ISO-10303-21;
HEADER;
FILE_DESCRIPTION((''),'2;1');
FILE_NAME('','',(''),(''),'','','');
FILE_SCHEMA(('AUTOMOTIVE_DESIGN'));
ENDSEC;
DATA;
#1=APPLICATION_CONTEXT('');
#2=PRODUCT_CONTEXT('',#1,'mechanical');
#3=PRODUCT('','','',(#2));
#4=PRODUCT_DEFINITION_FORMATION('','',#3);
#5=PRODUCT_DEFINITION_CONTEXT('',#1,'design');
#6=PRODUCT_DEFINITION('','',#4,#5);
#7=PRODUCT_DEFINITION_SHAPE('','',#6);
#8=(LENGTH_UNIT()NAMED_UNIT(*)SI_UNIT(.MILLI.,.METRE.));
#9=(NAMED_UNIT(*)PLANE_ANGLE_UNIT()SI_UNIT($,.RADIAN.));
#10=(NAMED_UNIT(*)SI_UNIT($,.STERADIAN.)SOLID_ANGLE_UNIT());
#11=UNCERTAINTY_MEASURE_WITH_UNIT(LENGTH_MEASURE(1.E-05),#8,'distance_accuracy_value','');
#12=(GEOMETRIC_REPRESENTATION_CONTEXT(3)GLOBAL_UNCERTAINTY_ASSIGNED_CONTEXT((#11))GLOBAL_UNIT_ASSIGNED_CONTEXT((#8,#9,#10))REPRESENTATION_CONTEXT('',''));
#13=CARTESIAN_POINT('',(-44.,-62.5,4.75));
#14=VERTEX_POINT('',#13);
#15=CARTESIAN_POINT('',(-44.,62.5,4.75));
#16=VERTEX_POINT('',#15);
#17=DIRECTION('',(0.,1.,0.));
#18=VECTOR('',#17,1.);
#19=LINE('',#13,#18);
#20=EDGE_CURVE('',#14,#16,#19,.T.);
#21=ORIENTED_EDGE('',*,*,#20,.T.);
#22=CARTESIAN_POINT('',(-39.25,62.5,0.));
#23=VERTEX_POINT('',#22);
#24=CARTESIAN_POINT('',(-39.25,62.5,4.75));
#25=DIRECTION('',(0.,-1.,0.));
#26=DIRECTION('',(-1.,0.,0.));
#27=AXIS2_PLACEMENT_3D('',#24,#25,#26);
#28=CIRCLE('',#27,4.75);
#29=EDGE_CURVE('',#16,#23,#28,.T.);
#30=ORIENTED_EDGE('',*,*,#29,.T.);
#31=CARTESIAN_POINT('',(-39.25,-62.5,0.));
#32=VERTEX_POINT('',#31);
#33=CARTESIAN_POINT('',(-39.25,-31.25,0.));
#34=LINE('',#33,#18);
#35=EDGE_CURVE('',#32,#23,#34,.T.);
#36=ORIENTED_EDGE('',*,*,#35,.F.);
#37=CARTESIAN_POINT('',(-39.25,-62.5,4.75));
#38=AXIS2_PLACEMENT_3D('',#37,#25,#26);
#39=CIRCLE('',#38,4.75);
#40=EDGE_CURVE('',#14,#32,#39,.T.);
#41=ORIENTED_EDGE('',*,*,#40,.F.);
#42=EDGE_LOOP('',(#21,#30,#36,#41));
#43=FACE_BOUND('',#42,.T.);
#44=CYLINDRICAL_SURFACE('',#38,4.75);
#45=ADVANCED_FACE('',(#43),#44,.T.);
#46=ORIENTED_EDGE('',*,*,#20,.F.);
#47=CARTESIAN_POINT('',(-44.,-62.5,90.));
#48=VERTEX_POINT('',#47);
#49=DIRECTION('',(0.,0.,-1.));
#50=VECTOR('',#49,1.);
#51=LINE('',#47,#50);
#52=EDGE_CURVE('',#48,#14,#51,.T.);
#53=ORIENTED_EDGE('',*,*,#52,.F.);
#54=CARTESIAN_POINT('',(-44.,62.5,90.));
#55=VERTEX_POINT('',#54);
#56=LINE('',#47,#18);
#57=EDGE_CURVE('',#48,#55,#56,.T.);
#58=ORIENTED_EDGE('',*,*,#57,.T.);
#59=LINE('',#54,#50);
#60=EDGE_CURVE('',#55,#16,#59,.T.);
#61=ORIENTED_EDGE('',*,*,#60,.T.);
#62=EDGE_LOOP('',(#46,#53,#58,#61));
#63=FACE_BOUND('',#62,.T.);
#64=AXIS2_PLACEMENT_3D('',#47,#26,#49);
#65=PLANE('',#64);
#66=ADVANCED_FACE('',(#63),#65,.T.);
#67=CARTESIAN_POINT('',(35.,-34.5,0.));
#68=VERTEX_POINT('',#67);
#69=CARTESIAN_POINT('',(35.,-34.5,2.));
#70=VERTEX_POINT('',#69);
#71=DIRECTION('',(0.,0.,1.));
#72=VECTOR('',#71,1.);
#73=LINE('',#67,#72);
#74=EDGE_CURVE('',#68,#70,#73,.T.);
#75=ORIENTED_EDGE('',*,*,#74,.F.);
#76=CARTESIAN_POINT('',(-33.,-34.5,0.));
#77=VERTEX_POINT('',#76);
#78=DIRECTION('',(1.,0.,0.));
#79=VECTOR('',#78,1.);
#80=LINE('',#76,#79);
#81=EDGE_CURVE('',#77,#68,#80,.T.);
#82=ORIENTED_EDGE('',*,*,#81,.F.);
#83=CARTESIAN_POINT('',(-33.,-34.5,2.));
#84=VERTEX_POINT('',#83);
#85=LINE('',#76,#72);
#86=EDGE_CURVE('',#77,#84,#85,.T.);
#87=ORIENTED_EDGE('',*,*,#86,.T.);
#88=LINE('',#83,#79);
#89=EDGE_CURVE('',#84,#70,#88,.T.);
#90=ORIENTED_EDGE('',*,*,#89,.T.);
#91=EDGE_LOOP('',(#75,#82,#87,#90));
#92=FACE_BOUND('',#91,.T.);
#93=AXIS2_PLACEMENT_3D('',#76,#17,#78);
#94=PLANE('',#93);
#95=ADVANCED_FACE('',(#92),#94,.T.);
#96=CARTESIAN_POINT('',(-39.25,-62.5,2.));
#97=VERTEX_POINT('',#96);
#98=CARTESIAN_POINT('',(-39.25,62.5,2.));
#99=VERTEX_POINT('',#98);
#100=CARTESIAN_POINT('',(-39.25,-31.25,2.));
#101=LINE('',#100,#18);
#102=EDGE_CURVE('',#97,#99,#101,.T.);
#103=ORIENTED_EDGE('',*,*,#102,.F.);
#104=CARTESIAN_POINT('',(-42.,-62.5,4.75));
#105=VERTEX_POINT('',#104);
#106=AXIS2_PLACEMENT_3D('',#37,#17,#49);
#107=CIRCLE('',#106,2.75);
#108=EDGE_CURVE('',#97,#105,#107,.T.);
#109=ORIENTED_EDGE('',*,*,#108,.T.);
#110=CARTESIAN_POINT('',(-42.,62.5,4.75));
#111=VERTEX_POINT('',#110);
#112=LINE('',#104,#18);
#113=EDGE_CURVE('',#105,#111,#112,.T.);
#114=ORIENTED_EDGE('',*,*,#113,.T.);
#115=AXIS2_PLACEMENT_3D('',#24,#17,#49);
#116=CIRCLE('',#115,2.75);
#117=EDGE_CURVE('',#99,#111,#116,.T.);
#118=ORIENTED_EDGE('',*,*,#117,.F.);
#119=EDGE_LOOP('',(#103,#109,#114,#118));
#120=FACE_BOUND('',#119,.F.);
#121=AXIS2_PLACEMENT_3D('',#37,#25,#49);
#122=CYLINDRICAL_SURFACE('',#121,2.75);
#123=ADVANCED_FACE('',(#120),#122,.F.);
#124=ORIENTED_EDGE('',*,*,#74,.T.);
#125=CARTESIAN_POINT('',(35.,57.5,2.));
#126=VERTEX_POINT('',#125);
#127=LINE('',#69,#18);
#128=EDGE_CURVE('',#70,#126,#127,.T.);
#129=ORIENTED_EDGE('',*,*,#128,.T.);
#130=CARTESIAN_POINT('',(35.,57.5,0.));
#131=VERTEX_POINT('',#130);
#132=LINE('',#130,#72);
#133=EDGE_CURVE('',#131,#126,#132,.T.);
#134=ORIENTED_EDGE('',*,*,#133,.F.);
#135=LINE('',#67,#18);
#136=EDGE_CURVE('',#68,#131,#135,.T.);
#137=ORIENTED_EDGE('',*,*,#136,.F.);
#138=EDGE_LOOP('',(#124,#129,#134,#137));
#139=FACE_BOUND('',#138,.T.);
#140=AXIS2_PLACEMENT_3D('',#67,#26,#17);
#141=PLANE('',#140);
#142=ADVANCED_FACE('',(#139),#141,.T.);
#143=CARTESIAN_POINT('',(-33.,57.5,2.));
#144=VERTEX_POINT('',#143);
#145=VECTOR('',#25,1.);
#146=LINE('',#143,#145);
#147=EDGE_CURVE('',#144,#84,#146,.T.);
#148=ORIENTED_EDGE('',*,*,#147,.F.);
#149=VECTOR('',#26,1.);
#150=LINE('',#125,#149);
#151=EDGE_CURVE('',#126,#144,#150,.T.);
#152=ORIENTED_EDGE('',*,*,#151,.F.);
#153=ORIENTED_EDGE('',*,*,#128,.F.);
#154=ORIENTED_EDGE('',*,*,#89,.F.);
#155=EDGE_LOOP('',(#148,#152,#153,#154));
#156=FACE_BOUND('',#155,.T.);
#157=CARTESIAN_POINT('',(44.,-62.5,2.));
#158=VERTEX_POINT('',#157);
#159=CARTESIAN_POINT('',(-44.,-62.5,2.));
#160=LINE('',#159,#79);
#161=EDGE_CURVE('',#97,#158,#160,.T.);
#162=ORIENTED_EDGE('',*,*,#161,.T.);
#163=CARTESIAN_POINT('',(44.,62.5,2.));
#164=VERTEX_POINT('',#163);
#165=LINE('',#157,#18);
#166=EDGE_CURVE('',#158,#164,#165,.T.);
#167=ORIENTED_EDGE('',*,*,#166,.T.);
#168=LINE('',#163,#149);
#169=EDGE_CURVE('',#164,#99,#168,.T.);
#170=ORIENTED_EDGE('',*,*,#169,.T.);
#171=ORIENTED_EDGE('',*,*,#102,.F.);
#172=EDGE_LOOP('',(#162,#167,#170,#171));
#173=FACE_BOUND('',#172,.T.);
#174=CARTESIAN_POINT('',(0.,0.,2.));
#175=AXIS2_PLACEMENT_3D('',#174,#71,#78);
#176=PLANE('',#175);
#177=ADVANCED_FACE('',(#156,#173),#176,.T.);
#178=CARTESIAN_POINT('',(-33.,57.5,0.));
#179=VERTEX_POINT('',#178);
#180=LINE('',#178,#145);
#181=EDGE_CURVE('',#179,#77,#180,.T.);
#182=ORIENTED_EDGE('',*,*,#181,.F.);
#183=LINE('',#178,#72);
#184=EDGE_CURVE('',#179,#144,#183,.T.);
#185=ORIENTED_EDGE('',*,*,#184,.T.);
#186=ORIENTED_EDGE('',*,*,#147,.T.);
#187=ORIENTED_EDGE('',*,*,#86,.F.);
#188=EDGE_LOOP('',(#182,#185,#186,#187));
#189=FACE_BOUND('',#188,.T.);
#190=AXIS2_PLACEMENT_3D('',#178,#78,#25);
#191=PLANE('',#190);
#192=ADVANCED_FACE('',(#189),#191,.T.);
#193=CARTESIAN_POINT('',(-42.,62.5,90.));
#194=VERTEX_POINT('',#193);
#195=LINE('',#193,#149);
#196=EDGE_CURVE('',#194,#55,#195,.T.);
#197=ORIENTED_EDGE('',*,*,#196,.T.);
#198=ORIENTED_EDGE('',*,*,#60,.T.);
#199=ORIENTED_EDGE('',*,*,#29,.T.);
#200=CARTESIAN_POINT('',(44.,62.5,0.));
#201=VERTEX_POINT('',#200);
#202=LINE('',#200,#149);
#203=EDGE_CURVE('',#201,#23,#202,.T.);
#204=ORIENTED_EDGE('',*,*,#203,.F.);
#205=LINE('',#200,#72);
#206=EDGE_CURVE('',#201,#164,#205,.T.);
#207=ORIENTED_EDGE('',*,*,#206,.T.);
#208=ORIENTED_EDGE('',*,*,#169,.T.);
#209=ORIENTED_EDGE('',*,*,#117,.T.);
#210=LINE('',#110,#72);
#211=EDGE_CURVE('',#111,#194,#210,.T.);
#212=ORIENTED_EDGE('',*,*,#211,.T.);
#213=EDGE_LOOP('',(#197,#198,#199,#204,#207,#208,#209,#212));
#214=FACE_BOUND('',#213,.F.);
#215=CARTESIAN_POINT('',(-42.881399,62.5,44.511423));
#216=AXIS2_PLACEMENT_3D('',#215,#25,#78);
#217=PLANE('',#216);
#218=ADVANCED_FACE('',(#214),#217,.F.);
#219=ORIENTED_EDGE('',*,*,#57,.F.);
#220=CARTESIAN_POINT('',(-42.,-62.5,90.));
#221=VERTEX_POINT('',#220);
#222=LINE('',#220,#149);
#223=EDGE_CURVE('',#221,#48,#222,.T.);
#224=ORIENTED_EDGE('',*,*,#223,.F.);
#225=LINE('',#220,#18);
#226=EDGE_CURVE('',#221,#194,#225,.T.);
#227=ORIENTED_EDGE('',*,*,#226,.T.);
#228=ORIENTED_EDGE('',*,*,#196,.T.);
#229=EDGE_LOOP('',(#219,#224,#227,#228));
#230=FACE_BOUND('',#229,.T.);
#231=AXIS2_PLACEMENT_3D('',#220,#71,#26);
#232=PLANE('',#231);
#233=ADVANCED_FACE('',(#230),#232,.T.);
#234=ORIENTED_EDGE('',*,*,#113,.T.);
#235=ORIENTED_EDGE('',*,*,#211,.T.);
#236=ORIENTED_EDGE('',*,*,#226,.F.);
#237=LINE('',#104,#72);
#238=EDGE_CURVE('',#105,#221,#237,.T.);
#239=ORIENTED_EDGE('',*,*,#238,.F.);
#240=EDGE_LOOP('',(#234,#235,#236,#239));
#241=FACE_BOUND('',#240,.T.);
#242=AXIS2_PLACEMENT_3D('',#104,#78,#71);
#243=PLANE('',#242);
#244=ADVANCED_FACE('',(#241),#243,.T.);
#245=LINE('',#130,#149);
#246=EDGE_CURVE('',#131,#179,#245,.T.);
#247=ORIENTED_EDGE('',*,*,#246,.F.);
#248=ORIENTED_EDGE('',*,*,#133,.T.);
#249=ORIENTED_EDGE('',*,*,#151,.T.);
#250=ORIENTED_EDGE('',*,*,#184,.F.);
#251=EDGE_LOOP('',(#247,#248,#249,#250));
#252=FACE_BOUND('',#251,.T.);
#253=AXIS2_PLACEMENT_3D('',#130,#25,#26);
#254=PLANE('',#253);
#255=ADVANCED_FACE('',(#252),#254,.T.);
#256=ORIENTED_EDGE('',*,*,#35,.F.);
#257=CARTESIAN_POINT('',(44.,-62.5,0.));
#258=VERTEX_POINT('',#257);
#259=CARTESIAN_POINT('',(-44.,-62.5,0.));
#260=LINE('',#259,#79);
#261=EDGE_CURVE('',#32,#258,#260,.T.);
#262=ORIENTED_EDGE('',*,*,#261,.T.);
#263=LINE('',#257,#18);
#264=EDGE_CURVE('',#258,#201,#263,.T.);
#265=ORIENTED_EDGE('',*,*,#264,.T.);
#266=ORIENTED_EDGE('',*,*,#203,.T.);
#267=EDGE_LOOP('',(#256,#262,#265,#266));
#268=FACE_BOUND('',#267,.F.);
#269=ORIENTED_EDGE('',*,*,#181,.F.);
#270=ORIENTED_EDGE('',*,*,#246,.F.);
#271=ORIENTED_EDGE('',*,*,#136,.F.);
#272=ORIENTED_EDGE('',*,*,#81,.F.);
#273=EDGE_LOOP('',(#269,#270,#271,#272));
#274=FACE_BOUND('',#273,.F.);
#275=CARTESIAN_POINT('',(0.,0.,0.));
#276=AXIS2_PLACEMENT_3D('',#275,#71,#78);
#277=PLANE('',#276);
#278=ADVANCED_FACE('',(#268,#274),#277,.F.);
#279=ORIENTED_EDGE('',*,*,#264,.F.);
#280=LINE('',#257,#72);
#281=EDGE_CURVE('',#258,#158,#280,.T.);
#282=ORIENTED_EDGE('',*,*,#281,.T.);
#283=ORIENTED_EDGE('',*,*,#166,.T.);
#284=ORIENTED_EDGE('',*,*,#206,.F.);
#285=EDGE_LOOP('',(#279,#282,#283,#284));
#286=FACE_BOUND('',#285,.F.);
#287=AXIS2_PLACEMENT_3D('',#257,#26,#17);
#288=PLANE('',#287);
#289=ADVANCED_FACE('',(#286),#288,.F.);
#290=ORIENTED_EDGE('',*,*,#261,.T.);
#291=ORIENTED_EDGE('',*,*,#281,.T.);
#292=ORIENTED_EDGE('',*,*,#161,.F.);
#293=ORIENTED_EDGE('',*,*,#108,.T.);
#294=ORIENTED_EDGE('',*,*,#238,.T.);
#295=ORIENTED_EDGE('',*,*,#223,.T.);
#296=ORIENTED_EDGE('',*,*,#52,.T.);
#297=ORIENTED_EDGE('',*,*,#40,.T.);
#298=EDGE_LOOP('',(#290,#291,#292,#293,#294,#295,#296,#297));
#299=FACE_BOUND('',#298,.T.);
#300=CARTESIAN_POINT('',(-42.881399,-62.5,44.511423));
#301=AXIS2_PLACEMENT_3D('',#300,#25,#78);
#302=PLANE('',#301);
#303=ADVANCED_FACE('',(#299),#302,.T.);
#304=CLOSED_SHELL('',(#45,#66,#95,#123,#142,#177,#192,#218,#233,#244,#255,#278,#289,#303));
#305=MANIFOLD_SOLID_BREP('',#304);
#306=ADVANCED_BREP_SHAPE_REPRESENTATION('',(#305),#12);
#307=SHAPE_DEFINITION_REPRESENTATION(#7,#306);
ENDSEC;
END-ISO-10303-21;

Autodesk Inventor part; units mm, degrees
ref_plane "YZ Plane" through (0, 0, 0) normal (1, 0, 0) x (0, 1, 0)
ref_plane "XZ Plane" through (0, 0, 0) normal (0, 1, 0) x (-1, 0, 0)
ref_plane "XY Plane" through (0, 0, 0) normal (0, 0, 1) x (1, 0, 0)
sketch "Sketch1" plane through (0, 0, 0) normal (0, 0, 1) x (1, 0, 0)
  line L0 (-44, -62.5) -> (44, -62.5)
  line L1 (44, -62.5) -> (44, 62.5)
  line L2 (44, 62.5) -> (-44, 62.5)
  line L3 (-44, 62.5) -> (-44, -62.5)
  line L4 (-44, -62.5) -> (44, 62.5) construction
  line L5 (44, -62.5) -> (-44, 62.5) construction
  line L6 (35, 57.5) -> (-33, 57.5)
  line L7 (-33, 57.5) -> (-33, -34.5)
  line L8 (-33, -34.5) -> (35, -34.5)
  line L9 (35, -34.5) -> (35, 57.5)
  point P0 (0, 0)
  dimension "d154" = 88
  dimension "d155" = 125
  dimension "d185" = 68
  dimension "d186" = 92
  dimension "d187" = 11
  dimension "d188" = 9
  dimension "d190" = 5
extrude "Plate5" add sketch "Sketch1" along normal blind 2
sketch "Sketch7" plane through (-42, -62.5, 0) normal (-1, 0, 0) x (0, -1, 0)
  line L0 (-125, 0) -> (0, 0)
  line L1 (0, 0) -> (0, 90)
  line L2 (0, 90) -> (-125, 90)
  line L3 (-125, 90) -> (-125, 0)
edge flange "Flange3" height 90 angle 90 thickness 2 bend radius 2.75 thickness toward (-1, 0, 0) relief round relief width 2 relief depth 1 edges at (-44, 0, 2) wall of the first edge with corners at (-42, 62.5, 0) (-42, -62.5, 0) (-42, -62.5, 90) (-42, 62.5, 90)
bend "Bend3"
corner "Corner3"
sketch "Sketch9" plane through (-44, -62.5, 90) normal (-1, 0, 0) x (0, 0, 1)
  line L0 (-27.375, 69.75) -> (-57.875, 69.75)
  line L1 (-57.875, 69.75) -> (-57.875, 100.25)
  line L2 (-57.875, 100.25) -> (-27.375, 100.25)
  line L3 (-27.375, 100.25) -> (-27.375, 69.75)
  line L4 (-27.375, 69.75) -> (-57.875, 100.25) construction
  line L5 (-57.875, 69.75) -> (-27.375, 100.25) construction
  circle A0 centre (-19.625, 62) radius 2.5
  circle A1 centre (-65.625, 62) radius 2.5
  circle A2 centre (-65.625, 108) radius 2.5
  circle A3 centre (-19.625, 108) radius 2.5
  circle A4 centre (-42.625, 85) radius 32.5269 construction
  line L6 (-57.875, 69.75) -> (-65.625, 62) construction
  line L7 (-17.125, 59.5) -> (-68.125, 59.5) construction
  line L8 (-68.125, 59.5) -> (-68.125, 110.5) construction
  line L9 (-68.125, 110.5) -> (-17.125, 110.5) construction
  line L10 (-17.125, 110.5) -> (-17.125, 59.5) construction
  line L11 (-17.125, 59.5) -> (-68.125, 110.5) construction
  line L12 (-68.125, 59.5) -> (-17.125, 110.5) construction
  line L13 (-85.25, 125) -> (0, 125) projected
  line L14 (-42.625, 125) -> (-42.625, 85) construction
  circle A5 centre (-65.625, 108) radius 10.9602 construction
  line L15 (-19.625, 62) -> (-65.625, 62) construction
  line L16 (-65.625, 62) -> (-65.625, 108) construction
  line L17 (-65.625, 108) -> (-19.625, 108) construction
  line L18 (-19.625, 108) -> (-19.625, 62) construction
  line L19 (-19.625, 62) -> (-65.625, 108) construction
  line L20 (-65.625, 62) -> (-19.625, 108) construction
  point P0 (-90, 62.5)
  point P1 (-104.8197, 150.8767)
  point P2 (-104.8197, 150.8767)
  dimension "d181" = 21.9203
  dimension "d174" = 30.5
  dimension "d175" = 30.5
  dimension "d176" = 5
  dimension "d179" = 40
  dimension "d180" = 51
  dimension "d184" = 46
cut "Cut2" [suppressed]
properties part number "PRS 8652 FDS Central tube wall_D940" material "Stainless Steel"
